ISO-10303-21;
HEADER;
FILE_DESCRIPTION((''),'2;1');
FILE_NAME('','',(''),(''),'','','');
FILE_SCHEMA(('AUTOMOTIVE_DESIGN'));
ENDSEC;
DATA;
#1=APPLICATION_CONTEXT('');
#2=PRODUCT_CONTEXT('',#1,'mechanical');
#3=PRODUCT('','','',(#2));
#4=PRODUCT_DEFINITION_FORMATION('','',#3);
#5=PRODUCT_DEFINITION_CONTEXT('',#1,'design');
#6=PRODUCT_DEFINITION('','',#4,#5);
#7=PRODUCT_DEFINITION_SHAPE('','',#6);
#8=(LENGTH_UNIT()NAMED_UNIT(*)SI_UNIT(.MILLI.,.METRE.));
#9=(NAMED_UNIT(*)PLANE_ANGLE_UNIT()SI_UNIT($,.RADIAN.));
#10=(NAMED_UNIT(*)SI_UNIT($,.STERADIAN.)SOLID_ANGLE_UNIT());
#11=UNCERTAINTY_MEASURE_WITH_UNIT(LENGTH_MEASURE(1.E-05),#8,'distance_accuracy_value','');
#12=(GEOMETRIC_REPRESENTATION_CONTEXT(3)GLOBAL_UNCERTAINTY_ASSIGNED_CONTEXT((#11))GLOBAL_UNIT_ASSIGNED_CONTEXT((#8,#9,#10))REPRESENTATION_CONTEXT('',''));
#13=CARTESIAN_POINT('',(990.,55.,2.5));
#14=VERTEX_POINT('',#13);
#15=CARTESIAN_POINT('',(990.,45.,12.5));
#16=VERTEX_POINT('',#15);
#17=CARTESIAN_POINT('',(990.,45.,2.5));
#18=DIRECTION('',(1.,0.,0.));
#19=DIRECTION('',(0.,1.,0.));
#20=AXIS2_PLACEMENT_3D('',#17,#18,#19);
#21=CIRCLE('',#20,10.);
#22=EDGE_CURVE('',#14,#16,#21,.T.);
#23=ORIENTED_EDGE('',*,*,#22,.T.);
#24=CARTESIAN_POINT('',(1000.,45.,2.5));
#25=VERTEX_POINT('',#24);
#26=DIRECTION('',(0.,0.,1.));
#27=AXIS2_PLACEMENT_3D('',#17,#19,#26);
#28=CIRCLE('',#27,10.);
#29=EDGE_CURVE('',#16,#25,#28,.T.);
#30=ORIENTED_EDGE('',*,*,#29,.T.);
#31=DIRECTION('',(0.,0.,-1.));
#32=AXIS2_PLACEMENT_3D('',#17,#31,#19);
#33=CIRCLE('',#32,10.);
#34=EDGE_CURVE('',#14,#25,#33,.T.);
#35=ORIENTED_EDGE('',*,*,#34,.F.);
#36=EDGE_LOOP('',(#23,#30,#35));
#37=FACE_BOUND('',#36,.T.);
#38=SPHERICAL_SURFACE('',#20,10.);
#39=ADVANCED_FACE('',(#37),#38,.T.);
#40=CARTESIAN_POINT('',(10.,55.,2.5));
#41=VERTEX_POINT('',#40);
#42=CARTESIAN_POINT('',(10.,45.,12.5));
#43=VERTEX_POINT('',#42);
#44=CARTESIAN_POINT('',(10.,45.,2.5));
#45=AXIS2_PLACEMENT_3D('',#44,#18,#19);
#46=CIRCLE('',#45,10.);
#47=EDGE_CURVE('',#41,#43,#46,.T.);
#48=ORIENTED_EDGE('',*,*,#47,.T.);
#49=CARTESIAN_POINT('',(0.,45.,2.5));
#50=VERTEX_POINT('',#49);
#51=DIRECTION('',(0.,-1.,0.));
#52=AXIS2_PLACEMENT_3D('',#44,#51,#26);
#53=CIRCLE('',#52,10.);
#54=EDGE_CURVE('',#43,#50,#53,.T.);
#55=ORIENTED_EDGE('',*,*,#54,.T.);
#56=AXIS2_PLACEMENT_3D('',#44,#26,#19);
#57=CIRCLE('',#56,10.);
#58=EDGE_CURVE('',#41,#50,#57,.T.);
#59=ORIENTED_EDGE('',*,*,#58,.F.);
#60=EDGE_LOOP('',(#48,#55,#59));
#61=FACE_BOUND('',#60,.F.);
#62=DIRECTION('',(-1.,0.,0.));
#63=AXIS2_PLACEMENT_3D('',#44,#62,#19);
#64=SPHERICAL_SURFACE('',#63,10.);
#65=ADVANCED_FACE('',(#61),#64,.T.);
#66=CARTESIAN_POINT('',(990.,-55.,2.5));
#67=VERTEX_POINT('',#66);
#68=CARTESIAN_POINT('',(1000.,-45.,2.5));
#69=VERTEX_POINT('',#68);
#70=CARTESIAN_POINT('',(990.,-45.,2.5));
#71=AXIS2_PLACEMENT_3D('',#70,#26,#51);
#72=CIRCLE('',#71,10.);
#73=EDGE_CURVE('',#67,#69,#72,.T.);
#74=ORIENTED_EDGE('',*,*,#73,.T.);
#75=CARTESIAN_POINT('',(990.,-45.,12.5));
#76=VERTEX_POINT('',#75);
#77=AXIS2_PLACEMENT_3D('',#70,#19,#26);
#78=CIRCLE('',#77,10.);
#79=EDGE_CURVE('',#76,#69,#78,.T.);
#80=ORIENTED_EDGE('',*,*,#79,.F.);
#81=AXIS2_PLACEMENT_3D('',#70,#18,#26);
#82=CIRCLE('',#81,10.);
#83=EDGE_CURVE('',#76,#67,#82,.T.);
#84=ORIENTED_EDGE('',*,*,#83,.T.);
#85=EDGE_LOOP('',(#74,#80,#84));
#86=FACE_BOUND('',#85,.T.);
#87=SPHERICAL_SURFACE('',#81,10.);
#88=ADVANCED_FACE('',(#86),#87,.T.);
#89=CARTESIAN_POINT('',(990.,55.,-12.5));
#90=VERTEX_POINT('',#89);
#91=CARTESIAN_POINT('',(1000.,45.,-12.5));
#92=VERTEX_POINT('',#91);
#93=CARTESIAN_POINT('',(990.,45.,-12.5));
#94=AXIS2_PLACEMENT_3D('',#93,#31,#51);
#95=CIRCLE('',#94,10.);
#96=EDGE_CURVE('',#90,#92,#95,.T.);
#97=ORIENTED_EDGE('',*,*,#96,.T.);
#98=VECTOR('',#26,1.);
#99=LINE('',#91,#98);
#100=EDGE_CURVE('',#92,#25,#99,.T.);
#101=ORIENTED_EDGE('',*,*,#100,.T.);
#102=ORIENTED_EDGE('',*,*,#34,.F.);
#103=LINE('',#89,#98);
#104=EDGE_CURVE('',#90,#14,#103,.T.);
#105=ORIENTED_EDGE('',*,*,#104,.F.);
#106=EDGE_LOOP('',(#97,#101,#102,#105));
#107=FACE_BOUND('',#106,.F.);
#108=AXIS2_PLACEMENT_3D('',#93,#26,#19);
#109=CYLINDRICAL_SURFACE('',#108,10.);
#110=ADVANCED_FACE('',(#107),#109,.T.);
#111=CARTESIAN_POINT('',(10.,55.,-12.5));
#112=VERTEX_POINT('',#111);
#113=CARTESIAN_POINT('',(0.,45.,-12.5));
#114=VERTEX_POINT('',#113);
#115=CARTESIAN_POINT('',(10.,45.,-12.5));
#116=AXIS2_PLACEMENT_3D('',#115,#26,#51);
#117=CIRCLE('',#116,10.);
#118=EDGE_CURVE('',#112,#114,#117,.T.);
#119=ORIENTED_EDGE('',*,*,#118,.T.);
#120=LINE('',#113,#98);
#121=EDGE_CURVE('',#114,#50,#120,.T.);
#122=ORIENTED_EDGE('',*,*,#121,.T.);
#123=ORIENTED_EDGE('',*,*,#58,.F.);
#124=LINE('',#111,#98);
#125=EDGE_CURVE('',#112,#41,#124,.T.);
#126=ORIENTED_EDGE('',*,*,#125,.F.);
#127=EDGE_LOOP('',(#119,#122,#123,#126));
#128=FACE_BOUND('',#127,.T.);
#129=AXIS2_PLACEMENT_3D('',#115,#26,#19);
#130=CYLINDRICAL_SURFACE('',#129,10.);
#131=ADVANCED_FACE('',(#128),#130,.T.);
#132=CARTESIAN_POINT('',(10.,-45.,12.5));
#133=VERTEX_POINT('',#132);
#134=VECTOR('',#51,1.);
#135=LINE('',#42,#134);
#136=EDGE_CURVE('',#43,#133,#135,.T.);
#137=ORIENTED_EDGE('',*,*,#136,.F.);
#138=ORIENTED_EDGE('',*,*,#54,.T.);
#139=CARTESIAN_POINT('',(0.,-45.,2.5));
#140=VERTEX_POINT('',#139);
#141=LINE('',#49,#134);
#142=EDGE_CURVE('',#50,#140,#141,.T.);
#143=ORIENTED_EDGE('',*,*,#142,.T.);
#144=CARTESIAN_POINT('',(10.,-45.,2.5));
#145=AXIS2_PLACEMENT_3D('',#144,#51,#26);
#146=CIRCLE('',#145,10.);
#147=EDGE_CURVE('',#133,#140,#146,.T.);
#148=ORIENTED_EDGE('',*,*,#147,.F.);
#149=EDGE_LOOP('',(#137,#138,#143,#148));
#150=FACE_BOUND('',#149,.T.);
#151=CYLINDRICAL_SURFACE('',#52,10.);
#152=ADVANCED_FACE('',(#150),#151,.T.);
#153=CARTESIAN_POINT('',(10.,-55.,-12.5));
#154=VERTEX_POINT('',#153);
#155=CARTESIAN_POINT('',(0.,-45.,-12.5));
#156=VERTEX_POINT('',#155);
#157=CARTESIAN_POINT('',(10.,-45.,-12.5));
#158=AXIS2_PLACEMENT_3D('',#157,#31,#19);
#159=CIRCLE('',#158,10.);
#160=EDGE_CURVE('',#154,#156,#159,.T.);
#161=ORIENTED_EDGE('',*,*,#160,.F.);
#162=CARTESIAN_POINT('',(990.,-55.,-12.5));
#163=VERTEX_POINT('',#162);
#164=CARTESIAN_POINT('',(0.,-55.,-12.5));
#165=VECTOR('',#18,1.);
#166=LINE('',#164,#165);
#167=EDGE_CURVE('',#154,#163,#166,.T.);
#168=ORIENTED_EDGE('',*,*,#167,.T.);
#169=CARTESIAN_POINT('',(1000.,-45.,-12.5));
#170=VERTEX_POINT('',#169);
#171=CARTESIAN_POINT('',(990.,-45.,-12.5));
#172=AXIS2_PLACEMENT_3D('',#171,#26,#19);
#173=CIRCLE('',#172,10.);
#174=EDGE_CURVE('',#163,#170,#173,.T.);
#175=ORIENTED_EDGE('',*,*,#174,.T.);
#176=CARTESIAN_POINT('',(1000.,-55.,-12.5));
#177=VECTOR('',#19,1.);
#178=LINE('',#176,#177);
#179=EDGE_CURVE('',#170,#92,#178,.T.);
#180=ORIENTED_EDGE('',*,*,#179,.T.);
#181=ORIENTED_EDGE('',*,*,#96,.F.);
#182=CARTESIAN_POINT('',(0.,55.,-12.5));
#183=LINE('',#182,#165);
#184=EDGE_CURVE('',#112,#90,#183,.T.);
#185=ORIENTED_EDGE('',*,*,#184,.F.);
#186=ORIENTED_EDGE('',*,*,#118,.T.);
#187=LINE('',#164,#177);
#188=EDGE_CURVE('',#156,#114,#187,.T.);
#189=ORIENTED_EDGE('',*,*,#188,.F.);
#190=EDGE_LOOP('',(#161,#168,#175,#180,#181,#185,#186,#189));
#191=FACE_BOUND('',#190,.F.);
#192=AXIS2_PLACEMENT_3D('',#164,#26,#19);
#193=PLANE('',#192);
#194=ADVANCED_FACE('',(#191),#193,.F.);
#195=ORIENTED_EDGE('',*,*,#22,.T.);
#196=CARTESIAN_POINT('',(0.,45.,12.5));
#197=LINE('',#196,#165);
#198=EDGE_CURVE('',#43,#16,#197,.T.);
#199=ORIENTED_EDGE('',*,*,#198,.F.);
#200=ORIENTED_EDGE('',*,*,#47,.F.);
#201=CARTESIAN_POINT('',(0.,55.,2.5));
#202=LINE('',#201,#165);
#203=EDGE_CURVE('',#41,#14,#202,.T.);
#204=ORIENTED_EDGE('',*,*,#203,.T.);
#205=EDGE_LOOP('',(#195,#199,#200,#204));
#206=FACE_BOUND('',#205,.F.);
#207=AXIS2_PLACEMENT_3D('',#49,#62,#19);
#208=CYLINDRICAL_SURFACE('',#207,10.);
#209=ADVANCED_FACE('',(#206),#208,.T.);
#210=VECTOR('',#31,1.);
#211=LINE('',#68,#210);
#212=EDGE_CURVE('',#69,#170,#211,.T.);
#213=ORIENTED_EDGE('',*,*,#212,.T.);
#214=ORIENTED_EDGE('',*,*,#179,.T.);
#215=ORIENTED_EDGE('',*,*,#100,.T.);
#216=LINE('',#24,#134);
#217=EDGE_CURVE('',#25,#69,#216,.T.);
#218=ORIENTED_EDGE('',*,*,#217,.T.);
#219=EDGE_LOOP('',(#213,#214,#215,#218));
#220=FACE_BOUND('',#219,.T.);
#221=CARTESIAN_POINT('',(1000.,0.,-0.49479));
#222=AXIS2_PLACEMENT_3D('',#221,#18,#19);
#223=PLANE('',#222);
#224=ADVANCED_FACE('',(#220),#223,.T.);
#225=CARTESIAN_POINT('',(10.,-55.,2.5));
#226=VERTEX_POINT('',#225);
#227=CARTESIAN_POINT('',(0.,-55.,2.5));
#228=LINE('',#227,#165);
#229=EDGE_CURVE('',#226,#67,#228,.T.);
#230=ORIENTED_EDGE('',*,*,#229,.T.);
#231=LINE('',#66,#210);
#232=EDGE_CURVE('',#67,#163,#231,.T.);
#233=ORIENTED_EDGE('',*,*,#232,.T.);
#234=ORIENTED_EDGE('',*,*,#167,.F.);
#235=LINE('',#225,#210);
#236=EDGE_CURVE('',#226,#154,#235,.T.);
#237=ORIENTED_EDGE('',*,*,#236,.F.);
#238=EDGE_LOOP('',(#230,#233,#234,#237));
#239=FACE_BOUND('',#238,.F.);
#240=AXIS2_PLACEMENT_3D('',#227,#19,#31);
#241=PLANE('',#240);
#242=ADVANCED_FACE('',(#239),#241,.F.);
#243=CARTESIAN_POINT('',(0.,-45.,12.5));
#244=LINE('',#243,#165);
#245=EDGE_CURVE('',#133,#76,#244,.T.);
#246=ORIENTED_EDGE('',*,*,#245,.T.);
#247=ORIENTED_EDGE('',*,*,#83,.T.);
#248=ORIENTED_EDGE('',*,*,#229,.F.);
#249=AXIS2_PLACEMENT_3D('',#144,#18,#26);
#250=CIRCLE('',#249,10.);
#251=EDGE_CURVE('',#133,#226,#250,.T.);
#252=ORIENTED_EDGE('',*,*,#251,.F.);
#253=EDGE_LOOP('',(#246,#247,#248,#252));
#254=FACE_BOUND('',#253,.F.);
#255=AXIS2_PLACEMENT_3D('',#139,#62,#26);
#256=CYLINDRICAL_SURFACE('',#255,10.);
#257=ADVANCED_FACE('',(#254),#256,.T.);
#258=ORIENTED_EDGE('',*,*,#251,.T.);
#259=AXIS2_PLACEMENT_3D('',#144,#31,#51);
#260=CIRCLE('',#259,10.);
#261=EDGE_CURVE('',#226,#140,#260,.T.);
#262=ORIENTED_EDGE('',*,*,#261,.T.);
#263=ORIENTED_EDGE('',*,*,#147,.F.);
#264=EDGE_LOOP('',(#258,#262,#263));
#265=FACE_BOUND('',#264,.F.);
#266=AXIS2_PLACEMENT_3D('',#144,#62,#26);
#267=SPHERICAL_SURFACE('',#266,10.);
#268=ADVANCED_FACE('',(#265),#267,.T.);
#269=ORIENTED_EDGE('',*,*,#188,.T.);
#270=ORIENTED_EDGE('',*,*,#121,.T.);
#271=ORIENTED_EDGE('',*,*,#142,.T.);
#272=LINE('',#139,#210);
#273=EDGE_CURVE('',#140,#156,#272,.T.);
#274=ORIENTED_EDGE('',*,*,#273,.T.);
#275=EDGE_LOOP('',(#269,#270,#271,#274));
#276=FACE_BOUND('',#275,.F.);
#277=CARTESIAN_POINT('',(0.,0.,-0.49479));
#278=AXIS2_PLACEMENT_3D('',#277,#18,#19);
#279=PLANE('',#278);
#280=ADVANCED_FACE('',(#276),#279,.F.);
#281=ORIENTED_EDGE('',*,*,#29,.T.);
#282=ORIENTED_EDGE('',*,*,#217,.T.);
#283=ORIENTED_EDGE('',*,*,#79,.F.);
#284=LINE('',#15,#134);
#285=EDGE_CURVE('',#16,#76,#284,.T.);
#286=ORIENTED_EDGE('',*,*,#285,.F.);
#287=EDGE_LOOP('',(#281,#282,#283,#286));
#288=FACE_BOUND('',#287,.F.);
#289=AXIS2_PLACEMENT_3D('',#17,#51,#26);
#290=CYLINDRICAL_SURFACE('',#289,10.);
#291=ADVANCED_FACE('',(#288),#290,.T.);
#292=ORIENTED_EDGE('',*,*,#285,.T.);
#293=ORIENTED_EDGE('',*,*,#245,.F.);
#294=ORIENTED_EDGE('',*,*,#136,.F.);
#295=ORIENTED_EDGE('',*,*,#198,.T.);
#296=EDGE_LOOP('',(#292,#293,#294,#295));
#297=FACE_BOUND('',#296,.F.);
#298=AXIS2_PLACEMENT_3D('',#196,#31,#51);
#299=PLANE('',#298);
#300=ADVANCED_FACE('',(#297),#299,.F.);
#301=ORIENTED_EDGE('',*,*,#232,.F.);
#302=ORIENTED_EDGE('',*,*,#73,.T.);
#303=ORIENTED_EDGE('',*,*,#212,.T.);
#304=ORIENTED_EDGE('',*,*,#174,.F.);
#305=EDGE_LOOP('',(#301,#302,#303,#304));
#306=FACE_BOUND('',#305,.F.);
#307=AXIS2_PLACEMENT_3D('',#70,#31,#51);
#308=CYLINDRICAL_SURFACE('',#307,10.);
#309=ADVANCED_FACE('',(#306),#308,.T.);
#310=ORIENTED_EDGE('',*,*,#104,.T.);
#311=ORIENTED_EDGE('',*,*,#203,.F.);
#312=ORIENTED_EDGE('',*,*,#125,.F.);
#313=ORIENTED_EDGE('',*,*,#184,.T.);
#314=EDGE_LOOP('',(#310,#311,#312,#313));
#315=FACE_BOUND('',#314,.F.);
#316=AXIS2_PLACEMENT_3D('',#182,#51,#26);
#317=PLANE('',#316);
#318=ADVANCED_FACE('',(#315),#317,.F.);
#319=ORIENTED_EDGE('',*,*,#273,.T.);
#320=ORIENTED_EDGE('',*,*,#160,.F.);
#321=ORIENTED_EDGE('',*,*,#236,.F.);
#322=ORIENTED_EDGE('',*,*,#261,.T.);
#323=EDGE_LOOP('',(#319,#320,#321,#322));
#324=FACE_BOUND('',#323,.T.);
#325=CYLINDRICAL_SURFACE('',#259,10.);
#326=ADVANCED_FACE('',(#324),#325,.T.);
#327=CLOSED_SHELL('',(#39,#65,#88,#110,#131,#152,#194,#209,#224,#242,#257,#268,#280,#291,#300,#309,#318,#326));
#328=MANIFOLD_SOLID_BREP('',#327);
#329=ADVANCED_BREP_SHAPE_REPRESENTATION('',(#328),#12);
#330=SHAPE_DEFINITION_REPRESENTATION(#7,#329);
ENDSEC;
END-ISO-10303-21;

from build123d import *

# Parameters (mm, degrees)
F1_DEPTH = 1000
F2_R     = 10


with BuildPart() as f1:
    # F0 (on Right) → F1 (new body)
    with BuildSketch(Plane.YZ):
        with BuildLine():
            Line((-55, -12.5), (55, -12.5))
            Line((55, -12.5), (55, 2.5))
            ThreePointArc((55, 2.5), (52.0710678119, 9.5710678119), (45, 12.5))
            Line((45, 12.5), (-45, 12.5))
            ThreePointArc((-45, 12.5), (-52.0710678119, 9.5710678119), (-55, 2.5))
            Line((-55, 2.5), (-55, -12.5))
        make_face()
    extrude(amount=F1_DEPTH)

    # F2
    f2_edges = [f1.edges().sort_by_distance(p)[0] for p in [
        (1000, 0, 12.5),
        (500, 45, 12.5),
        (500, -45, 12.5),
        (0, 0, 12.5),
    ]]
    fillet(f2_edges, radius=F2_R)


solid = f1.part
